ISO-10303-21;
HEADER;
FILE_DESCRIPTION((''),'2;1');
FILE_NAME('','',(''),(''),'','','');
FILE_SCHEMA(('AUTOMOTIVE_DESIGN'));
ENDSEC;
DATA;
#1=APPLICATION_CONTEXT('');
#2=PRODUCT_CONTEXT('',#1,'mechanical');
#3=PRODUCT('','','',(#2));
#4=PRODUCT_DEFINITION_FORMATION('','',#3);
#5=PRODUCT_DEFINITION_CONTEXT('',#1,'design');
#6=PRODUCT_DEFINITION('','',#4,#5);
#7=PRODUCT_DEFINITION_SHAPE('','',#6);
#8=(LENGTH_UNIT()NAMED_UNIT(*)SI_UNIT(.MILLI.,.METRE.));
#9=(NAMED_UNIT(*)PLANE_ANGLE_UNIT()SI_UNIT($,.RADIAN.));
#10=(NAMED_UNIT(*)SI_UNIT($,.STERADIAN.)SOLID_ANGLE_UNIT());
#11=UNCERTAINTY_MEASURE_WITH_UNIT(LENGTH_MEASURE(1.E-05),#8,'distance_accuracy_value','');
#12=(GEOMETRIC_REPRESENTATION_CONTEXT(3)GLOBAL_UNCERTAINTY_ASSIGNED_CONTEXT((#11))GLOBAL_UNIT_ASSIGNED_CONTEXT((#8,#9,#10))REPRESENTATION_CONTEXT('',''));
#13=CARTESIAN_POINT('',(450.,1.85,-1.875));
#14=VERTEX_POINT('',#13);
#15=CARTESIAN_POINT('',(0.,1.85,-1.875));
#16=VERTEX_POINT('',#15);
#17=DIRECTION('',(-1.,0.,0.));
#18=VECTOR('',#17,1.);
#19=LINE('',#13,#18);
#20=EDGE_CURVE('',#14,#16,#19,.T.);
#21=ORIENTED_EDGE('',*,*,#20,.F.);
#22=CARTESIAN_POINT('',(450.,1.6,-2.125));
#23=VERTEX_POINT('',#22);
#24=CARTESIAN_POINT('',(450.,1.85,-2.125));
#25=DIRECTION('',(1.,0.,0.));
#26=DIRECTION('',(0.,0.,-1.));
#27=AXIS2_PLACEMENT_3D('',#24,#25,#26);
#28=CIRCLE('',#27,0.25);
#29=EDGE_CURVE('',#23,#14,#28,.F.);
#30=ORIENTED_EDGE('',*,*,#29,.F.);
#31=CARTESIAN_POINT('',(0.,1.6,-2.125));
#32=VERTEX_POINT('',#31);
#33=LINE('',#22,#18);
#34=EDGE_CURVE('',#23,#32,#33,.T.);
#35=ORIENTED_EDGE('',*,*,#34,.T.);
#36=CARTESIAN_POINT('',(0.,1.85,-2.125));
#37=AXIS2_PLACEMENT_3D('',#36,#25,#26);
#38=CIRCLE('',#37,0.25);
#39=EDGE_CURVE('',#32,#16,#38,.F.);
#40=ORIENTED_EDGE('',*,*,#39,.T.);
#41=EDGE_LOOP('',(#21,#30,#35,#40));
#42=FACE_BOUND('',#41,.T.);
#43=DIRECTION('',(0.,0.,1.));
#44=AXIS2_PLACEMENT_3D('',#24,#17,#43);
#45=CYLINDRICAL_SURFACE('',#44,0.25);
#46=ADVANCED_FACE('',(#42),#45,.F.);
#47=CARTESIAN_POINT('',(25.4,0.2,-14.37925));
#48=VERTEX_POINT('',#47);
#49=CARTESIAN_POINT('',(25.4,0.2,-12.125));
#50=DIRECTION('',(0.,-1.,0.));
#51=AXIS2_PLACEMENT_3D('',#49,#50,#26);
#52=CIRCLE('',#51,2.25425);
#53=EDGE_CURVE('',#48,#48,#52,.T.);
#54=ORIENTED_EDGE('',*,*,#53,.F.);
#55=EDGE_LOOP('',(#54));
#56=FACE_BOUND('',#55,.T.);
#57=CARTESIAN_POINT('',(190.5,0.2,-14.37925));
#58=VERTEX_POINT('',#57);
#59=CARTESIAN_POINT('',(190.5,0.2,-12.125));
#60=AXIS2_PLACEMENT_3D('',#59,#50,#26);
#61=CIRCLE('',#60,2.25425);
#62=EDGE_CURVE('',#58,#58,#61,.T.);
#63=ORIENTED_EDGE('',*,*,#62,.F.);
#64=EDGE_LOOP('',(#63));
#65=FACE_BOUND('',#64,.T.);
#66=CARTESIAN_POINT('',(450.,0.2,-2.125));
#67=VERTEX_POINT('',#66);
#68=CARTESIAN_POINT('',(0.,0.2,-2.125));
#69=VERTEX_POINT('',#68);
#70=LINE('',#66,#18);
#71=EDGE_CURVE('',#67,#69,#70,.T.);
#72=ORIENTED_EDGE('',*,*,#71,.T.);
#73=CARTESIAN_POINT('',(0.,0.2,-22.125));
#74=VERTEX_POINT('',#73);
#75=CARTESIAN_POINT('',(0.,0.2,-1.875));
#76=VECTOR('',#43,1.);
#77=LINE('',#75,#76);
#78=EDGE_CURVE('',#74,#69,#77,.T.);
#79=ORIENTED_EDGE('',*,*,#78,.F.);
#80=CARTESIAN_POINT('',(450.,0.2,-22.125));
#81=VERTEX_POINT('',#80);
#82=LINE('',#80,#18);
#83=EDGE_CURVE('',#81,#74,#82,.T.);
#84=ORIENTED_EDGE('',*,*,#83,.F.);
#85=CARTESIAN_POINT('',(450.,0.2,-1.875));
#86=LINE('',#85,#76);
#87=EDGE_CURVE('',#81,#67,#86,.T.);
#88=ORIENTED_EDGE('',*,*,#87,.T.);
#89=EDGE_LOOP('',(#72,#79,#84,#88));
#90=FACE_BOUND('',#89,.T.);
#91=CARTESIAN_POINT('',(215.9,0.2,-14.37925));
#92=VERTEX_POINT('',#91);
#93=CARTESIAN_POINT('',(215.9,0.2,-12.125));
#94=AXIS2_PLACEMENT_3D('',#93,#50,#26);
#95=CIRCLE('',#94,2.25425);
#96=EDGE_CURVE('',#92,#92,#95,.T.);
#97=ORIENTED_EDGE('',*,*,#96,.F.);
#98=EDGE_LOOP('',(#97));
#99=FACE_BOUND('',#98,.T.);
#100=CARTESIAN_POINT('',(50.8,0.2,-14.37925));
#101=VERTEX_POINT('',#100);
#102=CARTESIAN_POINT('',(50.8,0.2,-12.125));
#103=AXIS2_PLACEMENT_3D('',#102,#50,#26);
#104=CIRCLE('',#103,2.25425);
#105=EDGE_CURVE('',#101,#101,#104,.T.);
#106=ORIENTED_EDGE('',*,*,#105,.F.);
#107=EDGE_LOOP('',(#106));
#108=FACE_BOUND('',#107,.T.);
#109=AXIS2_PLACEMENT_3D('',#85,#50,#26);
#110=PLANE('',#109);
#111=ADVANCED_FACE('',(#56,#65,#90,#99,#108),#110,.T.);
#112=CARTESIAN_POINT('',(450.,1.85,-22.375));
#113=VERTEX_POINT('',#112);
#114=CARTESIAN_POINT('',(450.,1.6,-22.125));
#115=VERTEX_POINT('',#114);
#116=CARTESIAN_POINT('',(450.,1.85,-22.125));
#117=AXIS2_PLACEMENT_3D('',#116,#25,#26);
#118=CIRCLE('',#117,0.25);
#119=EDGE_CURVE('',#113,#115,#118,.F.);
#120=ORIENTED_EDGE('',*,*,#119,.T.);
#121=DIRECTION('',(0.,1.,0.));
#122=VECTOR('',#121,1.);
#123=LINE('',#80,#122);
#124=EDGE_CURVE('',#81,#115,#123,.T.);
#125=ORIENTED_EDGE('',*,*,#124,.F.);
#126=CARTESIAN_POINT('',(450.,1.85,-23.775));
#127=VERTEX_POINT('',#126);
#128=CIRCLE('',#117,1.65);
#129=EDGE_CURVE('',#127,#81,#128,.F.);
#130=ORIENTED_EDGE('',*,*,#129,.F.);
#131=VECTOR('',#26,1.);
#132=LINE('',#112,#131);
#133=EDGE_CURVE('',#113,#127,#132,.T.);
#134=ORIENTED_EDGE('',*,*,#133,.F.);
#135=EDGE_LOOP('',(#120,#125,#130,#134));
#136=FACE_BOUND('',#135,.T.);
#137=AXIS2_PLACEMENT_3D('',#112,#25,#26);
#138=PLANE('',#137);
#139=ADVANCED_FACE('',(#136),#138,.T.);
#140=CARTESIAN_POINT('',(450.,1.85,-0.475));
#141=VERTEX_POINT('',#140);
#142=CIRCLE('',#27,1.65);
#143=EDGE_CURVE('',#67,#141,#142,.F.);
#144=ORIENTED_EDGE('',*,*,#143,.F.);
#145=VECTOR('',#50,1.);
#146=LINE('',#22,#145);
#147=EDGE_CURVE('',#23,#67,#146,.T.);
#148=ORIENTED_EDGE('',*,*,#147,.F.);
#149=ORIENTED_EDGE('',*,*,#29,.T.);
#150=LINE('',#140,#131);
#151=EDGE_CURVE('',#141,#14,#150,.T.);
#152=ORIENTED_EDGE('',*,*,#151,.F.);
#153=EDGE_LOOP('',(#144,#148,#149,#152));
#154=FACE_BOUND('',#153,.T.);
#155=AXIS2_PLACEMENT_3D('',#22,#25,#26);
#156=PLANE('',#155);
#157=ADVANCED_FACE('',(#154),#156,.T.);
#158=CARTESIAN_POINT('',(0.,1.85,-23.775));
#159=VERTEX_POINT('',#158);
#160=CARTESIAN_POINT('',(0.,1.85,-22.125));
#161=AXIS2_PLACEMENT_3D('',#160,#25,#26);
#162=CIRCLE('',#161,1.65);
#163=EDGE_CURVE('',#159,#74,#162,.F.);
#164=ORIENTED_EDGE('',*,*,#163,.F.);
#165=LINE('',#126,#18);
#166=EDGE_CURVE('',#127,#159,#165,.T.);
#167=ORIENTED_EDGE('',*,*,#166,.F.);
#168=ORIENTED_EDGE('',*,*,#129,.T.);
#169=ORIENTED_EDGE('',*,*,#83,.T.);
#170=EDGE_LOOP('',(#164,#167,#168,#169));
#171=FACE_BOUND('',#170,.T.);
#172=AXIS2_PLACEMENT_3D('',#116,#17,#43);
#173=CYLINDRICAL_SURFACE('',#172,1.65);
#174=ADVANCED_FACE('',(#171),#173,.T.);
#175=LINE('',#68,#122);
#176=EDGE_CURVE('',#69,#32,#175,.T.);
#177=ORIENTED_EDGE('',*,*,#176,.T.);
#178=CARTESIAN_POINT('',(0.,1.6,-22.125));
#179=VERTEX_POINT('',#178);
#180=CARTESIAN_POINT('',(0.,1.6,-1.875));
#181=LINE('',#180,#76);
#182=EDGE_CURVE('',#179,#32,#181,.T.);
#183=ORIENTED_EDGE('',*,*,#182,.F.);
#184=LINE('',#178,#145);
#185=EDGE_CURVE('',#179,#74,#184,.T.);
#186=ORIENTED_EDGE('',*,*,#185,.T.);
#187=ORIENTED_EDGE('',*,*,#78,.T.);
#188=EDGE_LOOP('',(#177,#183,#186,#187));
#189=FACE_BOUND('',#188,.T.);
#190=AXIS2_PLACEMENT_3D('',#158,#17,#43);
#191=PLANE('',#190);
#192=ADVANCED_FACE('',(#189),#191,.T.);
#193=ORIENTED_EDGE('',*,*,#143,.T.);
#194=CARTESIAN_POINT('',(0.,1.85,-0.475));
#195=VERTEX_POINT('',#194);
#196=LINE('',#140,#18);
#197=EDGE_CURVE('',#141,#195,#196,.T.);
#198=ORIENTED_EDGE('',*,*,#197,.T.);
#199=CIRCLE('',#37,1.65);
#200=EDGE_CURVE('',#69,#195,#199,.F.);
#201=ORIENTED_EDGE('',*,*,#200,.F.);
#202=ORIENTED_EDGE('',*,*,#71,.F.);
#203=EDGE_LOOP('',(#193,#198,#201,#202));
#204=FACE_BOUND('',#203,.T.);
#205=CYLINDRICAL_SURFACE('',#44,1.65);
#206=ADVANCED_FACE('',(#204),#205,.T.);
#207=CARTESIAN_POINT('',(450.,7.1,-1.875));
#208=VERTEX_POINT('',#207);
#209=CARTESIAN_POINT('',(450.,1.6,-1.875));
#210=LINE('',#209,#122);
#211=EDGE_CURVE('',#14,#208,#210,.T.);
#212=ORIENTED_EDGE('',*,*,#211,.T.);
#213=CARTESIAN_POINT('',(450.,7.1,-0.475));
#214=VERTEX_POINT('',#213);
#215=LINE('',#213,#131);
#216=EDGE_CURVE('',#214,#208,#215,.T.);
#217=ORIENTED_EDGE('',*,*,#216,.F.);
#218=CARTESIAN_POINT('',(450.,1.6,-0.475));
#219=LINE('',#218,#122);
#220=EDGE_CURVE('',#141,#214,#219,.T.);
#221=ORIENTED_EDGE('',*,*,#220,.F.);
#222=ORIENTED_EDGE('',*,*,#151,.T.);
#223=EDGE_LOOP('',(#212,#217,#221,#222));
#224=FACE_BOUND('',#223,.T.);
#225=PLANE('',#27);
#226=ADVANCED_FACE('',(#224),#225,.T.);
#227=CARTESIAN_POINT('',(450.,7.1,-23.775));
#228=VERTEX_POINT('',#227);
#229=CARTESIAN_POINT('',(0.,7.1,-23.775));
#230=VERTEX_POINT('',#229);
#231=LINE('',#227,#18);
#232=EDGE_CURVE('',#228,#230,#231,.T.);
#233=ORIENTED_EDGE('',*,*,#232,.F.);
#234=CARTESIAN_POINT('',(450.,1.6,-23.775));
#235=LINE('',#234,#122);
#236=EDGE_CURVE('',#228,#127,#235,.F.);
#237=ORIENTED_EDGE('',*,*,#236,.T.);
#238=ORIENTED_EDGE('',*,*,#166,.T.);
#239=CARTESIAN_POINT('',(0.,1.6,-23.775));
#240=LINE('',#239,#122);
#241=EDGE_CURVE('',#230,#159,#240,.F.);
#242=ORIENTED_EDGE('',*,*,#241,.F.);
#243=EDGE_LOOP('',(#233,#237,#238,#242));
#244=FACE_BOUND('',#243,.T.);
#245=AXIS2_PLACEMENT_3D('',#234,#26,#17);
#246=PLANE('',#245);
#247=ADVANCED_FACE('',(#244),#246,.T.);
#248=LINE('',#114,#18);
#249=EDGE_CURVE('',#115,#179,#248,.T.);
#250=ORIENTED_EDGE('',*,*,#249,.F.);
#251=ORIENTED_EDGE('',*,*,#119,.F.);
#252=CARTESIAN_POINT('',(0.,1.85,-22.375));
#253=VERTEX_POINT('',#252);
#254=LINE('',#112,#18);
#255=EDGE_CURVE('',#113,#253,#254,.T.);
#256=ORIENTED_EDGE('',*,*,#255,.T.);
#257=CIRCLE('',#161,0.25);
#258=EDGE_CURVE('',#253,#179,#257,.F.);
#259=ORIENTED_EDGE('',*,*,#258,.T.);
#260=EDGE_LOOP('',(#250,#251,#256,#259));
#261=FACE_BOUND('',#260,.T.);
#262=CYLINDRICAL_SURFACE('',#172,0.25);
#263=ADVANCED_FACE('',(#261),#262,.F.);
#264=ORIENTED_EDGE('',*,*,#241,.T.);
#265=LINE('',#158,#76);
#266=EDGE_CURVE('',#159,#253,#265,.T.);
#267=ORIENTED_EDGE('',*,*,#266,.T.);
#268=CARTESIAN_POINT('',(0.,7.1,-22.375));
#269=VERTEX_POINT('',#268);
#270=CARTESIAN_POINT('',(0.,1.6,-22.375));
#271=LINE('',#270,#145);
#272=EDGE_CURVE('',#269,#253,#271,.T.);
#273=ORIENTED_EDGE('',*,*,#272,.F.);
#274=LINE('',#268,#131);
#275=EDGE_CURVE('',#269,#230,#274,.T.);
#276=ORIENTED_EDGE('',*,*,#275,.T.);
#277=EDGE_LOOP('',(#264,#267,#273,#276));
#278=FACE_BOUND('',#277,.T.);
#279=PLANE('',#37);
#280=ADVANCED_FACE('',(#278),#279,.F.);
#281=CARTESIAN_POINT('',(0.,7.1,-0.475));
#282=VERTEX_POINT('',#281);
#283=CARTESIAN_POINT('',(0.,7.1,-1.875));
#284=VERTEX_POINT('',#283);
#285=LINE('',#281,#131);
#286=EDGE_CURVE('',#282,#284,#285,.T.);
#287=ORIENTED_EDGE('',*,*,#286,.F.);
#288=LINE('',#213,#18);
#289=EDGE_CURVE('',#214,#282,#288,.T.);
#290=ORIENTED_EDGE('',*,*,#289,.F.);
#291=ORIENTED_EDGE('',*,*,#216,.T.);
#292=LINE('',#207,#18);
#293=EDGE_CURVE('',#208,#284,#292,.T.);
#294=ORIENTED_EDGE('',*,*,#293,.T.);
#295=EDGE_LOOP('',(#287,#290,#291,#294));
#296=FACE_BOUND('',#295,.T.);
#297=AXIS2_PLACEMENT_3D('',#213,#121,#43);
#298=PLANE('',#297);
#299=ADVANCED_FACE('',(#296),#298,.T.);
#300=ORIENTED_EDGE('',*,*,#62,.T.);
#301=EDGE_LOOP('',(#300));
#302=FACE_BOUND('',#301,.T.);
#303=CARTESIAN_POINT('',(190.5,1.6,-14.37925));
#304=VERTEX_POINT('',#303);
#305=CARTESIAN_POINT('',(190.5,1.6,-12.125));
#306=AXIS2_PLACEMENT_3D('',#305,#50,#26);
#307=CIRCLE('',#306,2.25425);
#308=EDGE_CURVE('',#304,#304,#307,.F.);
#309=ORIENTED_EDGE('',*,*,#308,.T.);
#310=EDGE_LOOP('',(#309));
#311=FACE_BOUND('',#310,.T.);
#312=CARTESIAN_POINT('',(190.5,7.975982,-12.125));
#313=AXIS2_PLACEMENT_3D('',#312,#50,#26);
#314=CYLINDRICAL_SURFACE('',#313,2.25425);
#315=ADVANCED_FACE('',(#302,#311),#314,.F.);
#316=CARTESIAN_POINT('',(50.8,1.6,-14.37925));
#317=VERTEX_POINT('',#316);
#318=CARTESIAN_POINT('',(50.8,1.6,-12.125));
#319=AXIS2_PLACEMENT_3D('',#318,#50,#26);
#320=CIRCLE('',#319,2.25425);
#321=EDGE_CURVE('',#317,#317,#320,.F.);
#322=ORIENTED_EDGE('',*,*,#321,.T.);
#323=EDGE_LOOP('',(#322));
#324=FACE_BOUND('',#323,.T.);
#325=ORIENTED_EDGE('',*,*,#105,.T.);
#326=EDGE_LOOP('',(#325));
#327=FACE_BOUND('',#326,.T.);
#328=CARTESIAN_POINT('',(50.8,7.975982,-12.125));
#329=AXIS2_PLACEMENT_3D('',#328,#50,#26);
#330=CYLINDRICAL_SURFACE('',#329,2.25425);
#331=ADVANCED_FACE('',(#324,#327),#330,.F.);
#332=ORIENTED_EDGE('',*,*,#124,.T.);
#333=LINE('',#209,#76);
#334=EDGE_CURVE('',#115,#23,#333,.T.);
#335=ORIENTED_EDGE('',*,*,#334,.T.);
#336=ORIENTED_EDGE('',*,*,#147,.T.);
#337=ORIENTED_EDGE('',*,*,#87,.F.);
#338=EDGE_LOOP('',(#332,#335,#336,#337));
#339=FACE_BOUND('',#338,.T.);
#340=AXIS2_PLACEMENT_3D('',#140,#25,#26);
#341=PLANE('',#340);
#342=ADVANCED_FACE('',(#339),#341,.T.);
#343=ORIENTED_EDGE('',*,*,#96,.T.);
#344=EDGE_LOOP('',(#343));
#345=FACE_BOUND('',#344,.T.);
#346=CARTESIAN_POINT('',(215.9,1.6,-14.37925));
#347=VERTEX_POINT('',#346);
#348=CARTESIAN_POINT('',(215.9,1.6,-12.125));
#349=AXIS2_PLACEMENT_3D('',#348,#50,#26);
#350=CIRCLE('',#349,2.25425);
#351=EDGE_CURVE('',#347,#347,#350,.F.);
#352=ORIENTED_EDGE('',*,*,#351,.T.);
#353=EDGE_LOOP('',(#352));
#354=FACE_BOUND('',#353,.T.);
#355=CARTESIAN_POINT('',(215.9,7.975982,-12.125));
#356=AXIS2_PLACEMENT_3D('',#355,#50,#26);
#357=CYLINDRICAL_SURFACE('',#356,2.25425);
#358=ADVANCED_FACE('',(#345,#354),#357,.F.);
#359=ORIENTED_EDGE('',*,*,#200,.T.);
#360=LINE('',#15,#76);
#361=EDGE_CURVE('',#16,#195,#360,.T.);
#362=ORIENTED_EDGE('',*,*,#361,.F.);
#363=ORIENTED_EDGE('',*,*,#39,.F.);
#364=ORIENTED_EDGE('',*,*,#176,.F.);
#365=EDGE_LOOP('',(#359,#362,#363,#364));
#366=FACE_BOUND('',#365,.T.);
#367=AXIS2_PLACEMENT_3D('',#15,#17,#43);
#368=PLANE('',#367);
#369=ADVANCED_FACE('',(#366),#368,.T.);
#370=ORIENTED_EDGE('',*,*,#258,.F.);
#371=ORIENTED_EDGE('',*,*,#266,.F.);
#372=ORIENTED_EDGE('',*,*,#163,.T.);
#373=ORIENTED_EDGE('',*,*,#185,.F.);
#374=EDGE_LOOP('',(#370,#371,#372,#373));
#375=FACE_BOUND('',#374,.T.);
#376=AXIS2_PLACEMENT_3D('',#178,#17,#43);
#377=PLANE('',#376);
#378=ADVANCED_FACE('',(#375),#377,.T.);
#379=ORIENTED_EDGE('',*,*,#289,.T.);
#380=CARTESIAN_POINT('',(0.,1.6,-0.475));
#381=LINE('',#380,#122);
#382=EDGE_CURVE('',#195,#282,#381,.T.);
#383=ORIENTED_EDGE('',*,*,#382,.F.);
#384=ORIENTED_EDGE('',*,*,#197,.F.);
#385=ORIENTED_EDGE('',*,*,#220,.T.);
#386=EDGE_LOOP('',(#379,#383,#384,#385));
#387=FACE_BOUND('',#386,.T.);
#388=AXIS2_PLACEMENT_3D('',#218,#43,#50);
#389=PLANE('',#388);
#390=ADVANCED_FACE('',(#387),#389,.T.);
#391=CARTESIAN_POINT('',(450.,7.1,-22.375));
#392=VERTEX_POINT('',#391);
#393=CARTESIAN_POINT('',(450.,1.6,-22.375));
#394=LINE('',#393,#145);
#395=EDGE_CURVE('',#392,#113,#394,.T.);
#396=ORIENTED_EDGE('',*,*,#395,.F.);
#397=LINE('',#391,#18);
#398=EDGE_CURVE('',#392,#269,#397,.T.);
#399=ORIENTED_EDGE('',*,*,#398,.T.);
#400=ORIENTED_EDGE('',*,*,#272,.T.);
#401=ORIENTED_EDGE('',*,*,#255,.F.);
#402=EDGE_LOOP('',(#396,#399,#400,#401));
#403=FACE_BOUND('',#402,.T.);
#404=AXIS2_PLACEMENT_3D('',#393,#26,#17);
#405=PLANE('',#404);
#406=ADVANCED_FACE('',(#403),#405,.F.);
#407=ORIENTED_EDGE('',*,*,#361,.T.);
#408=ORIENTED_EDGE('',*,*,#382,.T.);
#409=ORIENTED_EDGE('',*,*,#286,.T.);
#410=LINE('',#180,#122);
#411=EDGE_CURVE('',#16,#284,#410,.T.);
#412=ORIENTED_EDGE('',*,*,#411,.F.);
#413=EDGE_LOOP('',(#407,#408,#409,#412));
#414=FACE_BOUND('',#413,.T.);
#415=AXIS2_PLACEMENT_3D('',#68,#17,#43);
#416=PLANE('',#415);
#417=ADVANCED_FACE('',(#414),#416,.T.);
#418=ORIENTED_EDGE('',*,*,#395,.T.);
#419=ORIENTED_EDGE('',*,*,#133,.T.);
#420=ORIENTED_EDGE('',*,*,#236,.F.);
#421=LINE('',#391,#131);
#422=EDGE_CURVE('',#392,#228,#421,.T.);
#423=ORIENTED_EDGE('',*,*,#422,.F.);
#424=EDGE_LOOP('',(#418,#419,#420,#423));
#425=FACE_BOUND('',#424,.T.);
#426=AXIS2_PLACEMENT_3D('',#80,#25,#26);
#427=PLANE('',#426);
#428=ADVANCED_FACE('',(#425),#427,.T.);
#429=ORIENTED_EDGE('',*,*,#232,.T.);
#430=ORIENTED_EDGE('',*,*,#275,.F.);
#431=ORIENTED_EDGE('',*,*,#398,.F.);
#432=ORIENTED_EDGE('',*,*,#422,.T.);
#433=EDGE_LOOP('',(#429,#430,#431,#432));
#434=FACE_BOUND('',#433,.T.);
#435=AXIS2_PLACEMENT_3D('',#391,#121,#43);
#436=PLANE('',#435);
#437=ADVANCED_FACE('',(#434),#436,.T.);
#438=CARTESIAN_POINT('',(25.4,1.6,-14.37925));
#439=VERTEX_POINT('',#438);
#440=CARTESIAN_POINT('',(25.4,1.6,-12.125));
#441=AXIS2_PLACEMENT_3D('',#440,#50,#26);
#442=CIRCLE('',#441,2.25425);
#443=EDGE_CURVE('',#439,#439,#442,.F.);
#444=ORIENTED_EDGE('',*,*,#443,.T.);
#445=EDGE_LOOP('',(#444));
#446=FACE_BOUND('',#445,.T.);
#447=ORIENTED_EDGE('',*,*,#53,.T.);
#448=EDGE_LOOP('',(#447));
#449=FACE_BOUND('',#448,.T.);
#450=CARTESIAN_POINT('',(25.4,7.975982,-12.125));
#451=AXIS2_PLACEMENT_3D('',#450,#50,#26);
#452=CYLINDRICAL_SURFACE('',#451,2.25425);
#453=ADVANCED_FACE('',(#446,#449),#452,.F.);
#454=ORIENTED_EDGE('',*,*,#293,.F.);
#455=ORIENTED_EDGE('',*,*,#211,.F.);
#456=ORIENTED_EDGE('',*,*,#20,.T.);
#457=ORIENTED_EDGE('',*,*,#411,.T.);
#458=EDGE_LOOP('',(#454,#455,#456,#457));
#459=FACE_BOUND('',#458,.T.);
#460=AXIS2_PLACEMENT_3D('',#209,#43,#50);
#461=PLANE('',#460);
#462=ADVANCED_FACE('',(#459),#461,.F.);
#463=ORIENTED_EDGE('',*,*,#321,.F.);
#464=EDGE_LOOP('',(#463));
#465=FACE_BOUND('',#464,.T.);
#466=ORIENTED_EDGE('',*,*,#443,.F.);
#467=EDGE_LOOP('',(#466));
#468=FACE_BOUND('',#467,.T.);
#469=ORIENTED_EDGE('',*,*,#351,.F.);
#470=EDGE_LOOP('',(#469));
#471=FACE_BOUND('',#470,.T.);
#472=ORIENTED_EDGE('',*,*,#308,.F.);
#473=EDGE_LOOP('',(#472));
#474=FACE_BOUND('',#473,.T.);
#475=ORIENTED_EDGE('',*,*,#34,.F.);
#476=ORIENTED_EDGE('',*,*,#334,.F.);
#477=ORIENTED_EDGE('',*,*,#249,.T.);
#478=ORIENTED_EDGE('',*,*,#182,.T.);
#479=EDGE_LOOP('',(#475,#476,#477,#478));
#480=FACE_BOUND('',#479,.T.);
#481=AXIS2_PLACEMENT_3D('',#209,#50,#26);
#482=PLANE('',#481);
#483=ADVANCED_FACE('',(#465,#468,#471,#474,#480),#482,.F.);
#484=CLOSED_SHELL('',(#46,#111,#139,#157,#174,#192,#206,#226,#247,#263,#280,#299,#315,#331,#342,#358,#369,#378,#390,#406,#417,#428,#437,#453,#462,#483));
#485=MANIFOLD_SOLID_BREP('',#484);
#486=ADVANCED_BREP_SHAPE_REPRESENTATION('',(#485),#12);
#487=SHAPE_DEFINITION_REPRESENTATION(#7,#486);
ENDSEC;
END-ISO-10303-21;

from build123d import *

# Parameters (mm, degrees)
BASE_FLANGE1_DEPTH = 450
SKETCH3_R          = 2.25425
CUT_EXTRUDE1_DEPTH = 1.4


# Sheet-metal steps are written as plain solids
with BuildPart() as part:
    # Sketch2 → Base-Flange1 (new body)
    with BuildSketch(Plane(origin=(0, 0, 0), x_dir=(0, 0, -1), z_dir=(1, 0, 0))):
        with BuildLine():
            Line((1.875, 7.1), (1.875, 1.85))
            ThreePointArc((1.875, 1.85), (1.948223305, 1.673223305), (2.125, 1.6))
            Line((2.125, 1.6), (22.125, 1.6))
            ThreePointArc((22.125, 1.6), (22.301776695, 1.673223305), (22.375, 1.85))
            Line((22.375, 1.85), (22.375, 7.1))
            Line((22.375, 7.1), (23.775, 7.1))
            Line((23.775, 7.1), (23.775, 1.85))
            ThreePointArc((23.775, 1.85), (23.291726189, 0.683273811), (22.125, 0.2))
            Line((22.125, 0.2), (2.125, 0.2))
            ThreePointArc((2.125, 0.2), (0.958273811, 0.683273811), (0.475, 1.85))
            Line((0.475, 1.85), (0.475, 7.1))
            Line((0.475, 7.1), (1.875, 7.1))
        make_face()
    extrude(amount=BASE_FLANGE1_DEPTH)

    # Sketch3 → Cut-Extrude1 (cut)
    with BuildSketch(Plane.XZ.offset(-0.2)):
        with Locations(Location((25.4, -12.125, 0), (0, 0, 270))):
            Circle(SKETCH3_R)
        with Locations(Location((50.8, -12.125, 0), (0, 0, 270))):
            Circle(SKETCH3_R)
        with Locations(Location((215.9, -12.125, 0), (0, 0, 270))):
            Circle(SKETCH3_R)
        with Locations(Location((190.5, -12.125, 0), (0, 0, 270))):
            Circle(SKETCH3_R)
    extrude(amount=-CUT_EXTRUDE1_DEPTH, mode=Mode.SUBTRACT)


solid = part.part
